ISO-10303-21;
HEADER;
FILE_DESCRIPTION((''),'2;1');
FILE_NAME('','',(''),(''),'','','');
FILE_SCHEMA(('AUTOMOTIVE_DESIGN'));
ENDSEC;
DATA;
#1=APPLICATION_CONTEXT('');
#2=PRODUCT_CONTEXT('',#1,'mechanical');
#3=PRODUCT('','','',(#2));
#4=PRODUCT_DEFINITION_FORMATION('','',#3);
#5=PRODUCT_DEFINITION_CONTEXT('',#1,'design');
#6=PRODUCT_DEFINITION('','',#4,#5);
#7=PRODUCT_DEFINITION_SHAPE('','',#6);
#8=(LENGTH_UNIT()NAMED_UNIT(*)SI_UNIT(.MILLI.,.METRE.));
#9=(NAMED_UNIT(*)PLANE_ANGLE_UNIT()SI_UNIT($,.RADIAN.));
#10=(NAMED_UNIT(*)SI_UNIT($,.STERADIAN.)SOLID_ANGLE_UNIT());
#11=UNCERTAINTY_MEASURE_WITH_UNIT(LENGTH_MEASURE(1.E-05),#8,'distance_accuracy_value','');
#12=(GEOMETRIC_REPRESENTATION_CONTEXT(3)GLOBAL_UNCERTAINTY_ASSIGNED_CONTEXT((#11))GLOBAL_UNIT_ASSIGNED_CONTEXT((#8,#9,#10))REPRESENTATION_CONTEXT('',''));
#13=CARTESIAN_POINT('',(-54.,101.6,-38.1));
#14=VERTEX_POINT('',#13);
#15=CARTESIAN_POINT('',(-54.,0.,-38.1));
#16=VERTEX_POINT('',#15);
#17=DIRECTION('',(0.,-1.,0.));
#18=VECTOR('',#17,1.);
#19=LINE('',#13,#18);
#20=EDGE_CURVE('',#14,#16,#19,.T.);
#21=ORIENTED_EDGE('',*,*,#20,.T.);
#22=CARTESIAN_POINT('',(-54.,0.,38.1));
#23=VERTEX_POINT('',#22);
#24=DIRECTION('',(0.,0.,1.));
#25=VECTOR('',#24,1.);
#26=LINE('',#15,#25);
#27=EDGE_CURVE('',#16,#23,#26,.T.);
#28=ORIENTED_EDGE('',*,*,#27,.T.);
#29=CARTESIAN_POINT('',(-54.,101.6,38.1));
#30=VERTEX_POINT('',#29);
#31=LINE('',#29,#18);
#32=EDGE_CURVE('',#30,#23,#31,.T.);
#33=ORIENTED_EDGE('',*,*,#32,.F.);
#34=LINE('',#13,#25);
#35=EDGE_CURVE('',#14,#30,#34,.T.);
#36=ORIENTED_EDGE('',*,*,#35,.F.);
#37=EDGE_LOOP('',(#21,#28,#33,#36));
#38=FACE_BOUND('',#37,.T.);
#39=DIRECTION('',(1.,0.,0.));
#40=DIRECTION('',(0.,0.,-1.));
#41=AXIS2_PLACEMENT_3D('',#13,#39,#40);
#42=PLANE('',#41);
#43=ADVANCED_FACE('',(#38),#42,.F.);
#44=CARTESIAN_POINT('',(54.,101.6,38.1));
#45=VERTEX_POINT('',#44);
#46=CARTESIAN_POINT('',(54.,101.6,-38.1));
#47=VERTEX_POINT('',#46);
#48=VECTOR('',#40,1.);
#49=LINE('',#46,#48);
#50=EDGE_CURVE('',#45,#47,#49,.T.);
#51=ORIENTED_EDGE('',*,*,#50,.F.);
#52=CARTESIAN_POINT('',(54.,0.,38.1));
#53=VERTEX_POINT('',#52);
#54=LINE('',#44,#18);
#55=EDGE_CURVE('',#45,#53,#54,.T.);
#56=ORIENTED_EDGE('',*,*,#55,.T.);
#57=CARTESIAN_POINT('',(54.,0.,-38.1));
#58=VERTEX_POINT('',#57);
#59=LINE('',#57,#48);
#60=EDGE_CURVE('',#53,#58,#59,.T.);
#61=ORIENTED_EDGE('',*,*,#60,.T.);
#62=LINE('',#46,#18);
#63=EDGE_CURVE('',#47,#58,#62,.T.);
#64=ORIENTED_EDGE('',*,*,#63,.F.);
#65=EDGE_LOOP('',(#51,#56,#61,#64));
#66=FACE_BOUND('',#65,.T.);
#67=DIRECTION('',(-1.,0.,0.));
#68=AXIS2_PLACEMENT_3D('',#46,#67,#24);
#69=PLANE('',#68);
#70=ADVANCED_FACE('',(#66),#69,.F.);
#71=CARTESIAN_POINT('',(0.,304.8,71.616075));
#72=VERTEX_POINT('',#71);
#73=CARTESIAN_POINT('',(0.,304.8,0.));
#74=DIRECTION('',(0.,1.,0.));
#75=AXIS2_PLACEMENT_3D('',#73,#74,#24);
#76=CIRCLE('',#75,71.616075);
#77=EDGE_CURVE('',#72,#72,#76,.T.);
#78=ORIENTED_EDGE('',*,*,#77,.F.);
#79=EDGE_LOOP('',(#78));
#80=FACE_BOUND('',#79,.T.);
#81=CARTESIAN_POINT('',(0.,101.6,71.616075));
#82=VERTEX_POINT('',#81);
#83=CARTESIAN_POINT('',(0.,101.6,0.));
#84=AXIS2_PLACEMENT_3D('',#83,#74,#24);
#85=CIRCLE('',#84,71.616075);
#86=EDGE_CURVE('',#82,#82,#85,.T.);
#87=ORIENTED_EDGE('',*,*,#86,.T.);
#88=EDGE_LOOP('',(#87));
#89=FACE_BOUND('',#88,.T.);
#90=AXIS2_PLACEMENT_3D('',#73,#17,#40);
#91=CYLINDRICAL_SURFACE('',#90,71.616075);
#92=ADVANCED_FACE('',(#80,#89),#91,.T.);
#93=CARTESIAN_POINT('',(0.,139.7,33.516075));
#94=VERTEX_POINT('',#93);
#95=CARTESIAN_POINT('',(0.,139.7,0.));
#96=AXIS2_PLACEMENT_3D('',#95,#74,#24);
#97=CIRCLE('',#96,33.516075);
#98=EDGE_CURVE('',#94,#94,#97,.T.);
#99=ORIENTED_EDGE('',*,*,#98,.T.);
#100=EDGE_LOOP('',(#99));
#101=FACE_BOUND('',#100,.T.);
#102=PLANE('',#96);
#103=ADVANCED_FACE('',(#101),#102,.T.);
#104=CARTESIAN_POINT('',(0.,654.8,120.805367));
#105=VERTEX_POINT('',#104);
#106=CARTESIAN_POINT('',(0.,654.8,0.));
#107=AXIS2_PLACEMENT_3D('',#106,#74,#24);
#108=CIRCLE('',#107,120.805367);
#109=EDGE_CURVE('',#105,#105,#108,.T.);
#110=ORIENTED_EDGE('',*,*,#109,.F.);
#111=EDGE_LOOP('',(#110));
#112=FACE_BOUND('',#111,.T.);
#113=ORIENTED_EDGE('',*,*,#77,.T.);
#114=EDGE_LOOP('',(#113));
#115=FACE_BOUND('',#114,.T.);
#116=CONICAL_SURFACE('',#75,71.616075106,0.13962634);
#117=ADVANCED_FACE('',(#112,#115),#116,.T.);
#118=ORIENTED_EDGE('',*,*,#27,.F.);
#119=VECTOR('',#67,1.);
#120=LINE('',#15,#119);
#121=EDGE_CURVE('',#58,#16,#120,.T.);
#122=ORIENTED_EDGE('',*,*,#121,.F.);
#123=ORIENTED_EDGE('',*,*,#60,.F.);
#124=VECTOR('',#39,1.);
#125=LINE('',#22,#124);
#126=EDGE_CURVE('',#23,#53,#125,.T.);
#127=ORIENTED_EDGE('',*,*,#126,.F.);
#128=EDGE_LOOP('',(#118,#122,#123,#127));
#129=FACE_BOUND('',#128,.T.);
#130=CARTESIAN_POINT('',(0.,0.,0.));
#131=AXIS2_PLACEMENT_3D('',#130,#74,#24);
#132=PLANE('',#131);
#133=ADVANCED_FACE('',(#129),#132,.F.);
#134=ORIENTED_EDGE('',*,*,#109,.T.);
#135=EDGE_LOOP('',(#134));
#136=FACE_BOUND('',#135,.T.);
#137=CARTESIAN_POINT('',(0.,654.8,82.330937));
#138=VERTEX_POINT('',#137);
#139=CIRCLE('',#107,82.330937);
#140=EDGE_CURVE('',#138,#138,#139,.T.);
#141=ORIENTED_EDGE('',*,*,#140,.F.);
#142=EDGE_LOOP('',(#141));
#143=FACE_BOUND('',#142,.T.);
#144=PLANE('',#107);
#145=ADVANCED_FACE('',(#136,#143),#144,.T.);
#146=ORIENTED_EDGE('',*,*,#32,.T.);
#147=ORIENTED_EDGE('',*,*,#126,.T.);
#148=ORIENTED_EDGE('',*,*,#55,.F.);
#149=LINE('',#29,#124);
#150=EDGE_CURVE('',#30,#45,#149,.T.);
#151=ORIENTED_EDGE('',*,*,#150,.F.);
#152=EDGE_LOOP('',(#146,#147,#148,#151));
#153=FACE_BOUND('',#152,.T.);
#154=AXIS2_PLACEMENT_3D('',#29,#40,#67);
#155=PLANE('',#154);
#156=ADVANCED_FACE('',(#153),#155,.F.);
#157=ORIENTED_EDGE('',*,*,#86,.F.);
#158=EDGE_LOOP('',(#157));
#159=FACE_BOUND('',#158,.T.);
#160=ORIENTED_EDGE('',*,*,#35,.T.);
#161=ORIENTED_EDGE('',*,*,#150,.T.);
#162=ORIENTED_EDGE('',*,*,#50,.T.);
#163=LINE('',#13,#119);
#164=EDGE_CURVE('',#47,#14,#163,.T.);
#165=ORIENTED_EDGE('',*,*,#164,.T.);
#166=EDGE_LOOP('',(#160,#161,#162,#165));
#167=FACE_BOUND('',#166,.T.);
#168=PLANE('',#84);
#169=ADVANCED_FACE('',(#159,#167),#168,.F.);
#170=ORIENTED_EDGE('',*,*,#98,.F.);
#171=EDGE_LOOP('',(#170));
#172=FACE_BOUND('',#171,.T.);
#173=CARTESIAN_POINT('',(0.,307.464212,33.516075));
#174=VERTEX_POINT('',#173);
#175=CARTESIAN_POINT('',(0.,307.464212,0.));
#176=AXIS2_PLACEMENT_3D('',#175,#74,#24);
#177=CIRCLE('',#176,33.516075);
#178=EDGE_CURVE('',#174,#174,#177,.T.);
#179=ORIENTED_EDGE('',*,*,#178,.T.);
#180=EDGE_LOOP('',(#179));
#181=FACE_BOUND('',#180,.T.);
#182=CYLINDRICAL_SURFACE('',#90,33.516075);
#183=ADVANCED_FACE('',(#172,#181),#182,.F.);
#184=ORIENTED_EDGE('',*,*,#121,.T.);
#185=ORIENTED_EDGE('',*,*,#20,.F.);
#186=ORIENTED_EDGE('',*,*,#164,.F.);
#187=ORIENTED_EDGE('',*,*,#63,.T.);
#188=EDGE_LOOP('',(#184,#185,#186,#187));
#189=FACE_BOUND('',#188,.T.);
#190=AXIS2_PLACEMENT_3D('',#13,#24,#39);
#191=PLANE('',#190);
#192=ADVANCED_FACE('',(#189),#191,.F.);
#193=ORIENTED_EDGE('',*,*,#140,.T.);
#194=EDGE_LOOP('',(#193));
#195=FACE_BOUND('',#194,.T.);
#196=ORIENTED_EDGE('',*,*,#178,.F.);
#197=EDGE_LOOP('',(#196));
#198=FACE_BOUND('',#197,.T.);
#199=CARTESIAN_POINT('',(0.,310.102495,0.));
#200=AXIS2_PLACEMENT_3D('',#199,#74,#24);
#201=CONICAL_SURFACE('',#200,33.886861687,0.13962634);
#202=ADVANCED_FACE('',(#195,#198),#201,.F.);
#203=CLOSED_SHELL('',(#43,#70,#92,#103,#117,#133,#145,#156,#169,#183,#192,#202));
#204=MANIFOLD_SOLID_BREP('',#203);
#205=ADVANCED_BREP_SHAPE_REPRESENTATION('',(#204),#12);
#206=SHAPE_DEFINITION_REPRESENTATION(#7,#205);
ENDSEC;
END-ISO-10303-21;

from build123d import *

# Parameters (mm, degrees)
SKETCH1_W           = 108
SKETCH1_H           = 76.2
BOSS_EXTRUDE1_DEPTH = 101.6
SKETCH2_R           = 71.616075106
BOSS_EXTRUDE2_DEPTH = 203.2
SKETCH4_R           = 71.616075106
BOSS_EXTRUDE3_DEPTH = 350
BOSS_EXTRUDE3_DRAFT = -8


# Read off the part's stored shape, not the designer's step: Shell1
with BuildPart() as part:
    # Sketch1 → Boss-Extrude1 (new body)
    with BuildSketch(Plane(origin=(0, 0, 0), x_dir=(1, 0, 0), z_dir=(0, 1, 0))):
        Rectangle(SKETCH1_W, SKETCH1_H)
    extrude(amount=BOSS_EXTRUDE1_DEPTH)

    # Sketch2 → Boss-Extrude2 (add)
    with BuildSketch(Plane(origin=(0, 101.6, 0), x_dir=(1, 0, 0), z_dir=(0, 1, 0))):
        with Locations(Location((0, 0, 0), (0, 0, 270))):
            Circle(SKETCH2_R)
    extrude(amount=BOSS_EXTRUDE2_DEPTH)


with BuildPart() as boss_extrude3_tool:
    # Sketch4 → Boss-Extrude3 (with draft: the straight prism first)
    with BuildSketch(Plane(origin=(0, 304.8, 0), x_dir=(1, 0, 0), z_dir=(0, 1, 0))):
        with Locations(Location((0, 0, 0), (0, 0, 270))):
            Circle(SKETCH4_R)
    extrude(amount=BOSS_EXTRUDE3_DEPTH)
    # Boss-Extrude3: the draft: its side faces are tilted about the plane it starts from
    boss_extrude3_sides = [boss_extrude3_tool.faces().sort_by_distance(p)[0] for p in [
        (0, 479.8, -71.616075106),
    ]]
    draft(boss_extrude3_sides, Plane(origin=(0, 304.8, 0), x_dir=(1, 0, 0), z_dir=(0, 1, 0)), BOSS_EXTRUDE3_DRAFT)


with BuildPart() as part_1:
    add(part.part)

    # Boss-Extrude3: add boss_extrude3_tool
    add(boss_extrude3_tool.part)

    # Shell1 outline → Shell1 (revolve, cut)
    with BuildSketch(Plane.XY):
        Polygon((0, 654.8), (0, 139.7), (33.516075106, 139.7), (33.516075106, 307.464211535), (82.330936739, 654.8), align=None)
    revolve(axis=Axis((0, 0, 0), (0, 1, 0)), mode=Mode.SUBTRACT)


solid = part_1.part
